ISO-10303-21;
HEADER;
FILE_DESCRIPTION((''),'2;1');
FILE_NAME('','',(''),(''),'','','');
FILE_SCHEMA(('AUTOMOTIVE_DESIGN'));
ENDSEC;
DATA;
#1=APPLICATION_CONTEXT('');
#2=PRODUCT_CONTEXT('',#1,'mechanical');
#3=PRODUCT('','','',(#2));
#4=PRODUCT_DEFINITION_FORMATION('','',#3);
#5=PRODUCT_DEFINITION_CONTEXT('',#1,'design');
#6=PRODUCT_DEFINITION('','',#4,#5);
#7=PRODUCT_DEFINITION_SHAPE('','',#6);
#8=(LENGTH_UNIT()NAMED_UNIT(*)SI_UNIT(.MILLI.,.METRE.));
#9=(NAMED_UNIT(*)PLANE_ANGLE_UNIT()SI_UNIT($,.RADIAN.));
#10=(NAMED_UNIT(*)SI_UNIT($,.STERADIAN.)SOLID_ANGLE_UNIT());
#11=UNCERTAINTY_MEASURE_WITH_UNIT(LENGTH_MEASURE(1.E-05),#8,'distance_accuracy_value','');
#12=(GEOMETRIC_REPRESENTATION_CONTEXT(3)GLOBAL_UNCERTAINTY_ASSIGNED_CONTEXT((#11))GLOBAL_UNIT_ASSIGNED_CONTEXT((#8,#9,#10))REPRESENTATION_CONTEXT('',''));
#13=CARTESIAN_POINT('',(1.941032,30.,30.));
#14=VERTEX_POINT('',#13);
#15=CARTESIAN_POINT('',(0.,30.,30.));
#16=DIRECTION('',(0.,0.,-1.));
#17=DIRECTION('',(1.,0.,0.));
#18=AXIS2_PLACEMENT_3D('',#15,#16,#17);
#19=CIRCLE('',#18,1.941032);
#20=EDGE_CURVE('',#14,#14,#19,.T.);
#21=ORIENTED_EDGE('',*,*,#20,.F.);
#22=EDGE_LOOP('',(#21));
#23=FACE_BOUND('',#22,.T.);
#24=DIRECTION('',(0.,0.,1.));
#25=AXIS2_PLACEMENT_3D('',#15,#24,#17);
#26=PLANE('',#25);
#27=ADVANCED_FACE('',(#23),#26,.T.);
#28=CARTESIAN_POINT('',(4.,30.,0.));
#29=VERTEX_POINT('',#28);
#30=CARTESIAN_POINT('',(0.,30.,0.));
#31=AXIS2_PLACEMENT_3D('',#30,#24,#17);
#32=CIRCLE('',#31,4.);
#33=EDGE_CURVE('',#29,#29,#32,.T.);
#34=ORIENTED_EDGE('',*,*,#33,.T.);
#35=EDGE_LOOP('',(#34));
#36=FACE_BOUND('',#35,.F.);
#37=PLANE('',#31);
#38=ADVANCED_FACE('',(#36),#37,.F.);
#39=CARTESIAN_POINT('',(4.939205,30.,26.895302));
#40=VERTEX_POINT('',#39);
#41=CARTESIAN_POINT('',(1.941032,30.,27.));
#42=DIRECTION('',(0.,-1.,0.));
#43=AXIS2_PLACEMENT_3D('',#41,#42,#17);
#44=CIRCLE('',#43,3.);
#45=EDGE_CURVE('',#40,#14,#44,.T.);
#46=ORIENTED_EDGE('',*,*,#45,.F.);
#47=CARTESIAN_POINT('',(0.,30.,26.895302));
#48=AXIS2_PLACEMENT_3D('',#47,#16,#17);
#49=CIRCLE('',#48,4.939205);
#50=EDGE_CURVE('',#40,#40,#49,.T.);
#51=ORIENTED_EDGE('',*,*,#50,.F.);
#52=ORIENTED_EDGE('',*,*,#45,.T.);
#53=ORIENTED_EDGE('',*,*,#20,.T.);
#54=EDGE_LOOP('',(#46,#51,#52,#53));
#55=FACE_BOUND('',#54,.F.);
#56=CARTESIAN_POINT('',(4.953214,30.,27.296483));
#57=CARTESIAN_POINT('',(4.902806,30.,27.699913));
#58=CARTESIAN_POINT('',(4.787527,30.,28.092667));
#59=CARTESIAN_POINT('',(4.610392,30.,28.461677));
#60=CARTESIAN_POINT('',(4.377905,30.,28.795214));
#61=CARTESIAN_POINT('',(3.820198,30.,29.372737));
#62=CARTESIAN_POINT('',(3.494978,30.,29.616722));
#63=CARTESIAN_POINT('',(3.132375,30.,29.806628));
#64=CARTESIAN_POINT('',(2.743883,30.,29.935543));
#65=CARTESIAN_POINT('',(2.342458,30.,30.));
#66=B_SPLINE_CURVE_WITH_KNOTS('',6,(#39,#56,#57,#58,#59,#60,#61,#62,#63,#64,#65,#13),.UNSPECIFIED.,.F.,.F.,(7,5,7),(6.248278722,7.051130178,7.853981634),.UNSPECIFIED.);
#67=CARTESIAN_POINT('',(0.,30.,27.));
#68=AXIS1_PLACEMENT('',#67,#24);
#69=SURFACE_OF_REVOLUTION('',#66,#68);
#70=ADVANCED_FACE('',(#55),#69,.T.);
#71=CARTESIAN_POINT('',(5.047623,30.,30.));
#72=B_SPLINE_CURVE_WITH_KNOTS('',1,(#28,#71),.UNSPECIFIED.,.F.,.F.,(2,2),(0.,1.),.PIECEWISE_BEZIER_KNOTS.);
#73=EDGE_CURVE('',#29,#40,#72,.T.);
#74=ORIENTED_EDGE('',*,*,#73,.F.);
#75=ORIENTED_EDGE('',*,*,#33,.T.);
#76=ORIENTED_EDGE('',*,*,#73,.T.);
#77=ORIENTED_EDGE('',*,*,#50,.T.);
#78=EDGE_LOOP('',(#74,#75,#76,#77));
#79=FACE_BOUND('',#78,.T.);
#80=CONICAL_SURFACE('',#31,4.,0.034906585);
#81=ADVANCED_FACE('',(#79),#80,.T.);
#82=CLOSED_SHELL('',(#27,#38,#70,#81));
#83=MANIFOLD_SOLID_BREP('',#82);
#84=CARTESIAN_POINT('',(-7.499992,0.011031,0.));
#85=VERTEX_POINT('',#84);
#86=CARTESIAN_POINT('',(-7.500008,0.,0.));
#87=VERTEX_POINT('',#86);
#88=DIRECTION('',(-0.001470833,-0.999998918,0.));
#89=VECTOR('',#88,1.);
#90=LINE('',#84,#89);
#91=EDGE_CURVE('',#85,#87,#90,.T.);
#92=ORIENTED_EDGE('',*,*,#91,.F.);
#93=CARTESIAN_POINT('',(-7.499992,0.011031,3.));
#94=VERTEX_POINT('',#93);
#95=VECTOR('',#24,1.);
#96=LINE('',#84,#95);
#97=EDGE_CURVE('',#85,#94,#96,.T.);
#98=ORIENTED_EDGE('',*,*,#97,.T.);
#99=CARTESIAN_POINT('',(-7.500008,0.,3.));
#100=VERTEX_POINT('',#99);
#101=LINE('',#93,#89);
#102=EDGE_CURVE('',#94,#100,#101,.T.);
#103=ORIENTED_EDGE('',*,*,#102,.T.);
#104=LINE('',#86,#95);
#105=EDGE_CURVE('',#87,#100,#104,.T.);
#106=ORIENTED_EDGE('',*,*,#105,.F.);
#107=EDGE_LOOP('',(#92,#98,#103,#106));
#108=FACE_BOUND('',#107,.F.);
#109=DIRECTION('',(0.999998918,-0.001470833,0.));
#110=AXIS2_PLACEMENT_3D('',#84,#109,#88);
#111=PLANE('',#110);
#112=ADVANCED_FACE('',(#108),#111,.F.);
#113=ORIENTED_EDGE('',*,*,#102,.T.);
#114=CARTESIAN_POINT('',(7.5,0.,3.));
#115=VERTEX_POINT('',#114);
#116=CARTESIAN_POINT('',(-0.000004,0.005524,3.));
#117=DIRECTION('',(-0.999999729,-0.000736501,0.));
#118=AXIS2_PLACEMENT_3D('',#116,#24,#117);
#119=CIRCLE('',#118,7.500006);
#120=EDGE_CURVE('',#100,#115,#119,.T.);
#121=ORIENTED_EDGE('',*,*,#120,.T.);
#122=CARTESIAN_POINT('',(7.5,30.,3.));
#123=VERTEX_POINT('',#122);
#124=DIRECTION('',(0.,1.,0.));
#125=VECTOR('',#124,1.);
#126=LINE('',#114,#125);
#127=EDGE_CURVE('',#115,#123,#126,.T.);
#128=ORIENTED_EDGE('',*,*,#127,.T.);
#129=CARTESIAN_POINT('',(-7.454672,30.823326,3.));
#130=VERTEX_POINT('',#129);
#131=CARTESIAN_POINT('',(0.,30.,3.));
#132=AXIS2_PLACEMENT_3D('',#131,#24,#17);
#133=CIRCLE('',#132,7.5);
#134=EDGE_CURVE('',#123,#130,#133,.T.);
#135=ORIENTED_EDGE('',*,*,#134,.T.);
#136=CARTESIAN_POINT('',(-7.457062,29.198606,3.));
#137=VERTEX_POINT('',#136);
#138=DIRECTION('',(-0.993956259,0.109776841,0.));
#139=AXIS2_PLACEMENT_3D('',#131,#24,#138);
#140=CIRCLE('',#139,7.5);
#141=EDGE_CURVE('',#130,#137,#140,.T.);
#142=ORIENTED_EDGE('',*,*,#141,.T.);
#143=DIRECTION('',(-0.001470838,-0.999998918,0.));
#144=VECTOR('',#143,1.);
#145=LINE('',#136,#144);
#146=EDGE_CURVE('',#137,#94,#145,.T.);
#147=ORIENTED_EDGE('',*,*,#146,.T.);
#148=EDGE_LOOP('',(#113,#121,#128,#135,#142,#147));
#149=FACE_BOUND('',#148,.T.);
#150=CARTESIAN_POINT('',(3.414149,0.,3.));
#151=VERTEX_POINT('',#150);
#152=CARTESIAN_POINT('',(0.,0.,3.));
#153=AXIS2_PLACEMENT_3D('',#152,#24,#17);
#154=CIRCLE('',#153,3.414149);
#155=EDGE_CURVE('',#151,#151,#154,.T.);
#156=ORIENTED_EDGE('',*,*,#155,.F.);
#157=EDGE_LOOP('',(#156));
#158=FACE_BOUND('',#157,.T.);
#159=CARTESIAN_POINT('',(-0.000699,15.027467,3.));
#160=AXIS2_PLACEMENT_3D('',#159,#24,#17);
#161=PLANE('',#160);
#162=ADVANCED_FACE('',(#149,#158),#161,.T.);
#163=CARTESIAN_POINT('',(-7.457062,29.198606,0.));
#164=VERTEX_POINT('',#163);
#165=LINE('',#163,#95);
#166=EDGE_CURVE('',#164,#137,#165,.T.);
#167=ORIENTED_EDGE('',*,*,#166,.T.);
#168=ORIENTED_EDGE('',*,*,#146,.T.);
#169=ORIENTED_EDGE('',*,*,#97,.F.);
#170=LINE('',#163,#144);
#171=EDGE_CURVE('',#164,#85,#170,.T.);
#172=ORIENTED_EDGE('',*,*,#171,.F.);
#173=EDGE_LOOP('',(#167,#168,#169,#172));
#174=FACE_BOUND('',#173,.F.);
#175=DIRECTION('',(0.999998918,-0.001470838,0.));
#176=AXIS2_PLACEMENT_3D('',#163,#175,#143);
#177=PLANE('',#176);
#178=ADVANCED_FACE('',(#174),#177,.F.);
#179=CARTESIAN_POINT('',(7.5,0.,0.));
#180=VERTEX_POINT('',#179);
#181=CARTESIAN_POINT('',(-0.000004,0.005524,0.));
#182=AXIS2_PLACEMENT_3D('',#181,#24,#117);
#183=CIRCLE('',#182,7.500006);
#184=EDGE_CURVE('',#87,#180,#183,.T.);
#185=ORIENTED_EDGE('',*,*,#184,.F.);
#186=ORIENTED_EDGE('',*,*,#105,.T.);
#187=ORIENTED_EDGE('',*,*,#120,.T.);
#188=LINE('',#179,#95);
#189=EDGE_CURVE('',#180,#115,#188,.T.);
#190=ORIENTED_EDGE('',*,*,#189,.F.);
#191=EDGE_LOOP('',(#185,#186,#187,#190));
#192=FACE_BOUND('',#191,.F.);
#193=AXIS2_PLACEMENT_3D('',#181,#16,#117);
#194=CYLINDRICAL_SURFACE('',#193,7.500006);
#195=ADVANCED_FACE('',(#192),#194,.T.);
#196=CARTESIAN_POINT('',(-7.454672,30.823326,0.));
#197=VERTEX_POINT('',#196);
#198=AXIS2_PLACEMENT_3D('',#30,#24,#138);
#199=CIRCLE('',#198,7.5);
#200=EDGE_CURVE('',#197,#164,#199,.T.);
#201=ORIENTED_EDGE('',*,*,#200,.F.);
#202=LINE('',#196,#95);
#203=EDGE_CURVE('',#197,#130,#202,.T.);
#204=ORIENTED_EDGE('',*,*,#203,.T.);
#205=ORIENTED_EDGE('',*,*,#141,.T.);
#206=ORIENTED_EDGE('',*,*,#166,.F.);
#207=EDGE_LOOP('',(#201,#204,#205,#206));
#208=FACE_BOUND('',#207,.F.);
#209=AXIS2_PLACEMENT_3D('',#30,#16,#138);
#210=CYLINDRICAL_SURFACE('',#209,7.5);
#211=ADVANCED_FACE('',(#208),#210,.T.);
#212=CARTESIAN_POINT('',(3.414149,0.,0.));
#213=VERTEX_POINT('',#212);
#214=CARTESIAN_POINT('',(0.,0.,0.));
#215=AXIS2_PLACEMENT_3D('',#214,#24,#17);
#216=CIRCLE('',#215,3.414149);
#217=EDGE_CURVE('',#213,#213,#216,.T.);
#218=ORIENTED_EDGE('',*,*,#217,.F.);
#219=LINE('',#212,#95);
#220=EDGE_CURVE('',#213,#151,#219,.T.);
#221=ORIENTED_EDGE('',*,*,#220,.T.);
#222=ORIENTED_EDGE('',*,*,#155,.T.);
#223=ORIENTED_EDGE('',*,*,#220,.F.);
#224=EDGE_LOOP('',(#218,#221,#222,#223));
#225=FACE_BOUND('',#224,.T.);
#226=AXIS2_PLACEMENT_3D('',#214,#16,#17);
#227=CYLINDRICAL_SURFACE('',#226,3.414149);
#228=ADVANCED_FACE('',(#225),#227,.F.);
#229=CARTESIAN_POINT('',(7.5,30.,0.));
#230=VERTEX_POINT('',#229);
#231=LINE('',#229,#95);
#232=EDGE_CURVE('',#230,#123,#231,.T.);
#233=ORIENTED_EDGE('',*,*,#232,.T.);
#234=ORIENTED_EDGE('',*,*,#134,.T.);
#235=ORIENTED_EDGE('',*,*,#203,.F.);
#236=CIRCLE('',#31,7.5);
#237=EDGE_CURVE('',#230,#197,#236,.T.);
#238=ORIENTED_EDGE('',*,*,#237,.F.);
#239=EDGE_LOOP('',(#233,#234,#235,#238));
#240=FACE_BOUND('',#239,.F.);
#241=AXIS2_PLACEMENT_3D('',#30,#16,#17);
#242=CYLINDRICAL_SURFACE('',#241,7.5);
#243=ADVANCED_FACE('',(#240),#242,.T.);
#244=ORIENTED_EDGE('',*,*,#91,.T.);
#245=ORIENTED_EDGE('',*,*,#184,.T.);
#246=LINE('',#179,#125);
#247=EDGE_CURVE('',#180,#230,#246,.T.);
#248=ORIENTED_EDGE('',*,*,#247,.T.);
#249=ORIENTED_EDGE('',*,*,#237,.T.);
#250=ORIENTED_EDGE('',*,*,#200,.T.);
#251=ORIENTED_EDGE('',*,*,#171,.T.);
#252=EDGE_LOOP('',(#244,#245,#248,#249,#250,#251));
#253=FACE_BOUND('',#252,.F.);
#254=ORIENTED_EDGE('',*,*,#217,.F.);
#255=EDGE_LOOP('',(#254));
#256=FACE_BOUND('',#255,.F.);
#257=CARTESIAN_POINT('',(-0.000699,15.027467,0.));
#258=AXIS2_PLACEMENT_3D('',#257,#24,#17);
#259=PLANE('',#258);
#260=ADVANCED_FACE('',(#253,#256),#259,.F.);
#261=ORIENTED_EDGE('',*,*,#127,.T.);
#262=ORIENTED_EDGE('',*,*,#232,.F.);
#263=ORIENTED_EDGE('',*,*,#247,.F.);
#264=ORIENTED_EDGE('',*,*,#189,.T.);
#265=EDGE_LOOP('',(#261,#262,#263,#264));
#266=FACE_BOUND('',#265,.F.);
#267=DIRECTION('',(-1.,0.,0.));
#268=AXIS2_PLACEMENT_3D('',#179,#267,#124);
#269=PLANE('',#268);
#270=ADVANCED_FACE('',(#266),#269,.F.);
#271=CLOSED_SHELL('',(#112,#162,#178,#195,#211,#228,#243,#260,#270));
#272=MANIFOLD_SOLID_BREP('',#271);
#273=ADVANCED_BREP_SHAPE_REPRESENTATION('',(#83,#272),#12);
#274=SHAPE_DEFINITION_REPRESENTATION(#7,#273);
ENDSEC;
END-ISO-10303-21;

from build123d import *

# Parameters (mm, degrees)
F0_R     = 3.4141491506
F0_R_2   = 4
F1_DEPTH = 3
F2_DEPTH = 30
F2_TAPER = -2
F3_R     = 3


# Not quite as in the source:
# - ends of sketch curves that miss each other by under 0.0002 mm in the source are joined


with BuildPart() as f1:
    # F0 (on Top) → F1 (new body)
    with BuildSketch(Plane.XY):
        with BuildLine():
            ThreePointArc((7.5, 30), (0.4122865649, 37.488659412), (-7.4546719436, 30.8233263106))
            Line((-7.4546719436, 30.8233263106), (-7.4570616459, 29.1986064578))
            Line((-7.4570616459, 29.1986064578), (-7.4999918874, 0.0110312851))
            Line((-7.4999918874, 0.0110312851), (-7.5000081126, 0))
            ThreePointArc((-7.5000081126, 0), (4.0503e-06, -7.4944823293), (7.5, 0))
            Line((7.5, 0), (7.5, 30))
        make_face()
        Circle(F0_R, mode=Mode.SUBTRACT)
        with Locations((0, 30)):
            Circle(F0_R_2, mode=Mode.SUBTRACT)
        with BuildLine():
            Line((-7.4570616459, 29.1986064578), (-7.4546719436, 30.8233263106))
            ThreePointArc((-7.4546719436, 30.8233263106), (-7.4999918874, 30.0110312851), (-7.4570616459, 29.1986064578))
        make_face()
        with Locations((0, 30)):
            Circle(F0_R_2)
    extrude(amount=F1_DEPTH)


with BuildPart() as f2:
    # F0 (on Top) → F2 (new body)
    with BuildSketch(Plane.XY):
        with Locations((0, 30)):
            Circle(F0_R_2)
    extrude(amount=F2_DEPTH, taper=F2_TAPER)

    # F3
    f3_edges = [f2.edges().sort_by_distance(p)[0] for p in [
        (-5.047623, 30, 30),
    ]]
    fillet(f3_edges, radius=F3_R)


solid = Compound([f1.part, f2.part])
